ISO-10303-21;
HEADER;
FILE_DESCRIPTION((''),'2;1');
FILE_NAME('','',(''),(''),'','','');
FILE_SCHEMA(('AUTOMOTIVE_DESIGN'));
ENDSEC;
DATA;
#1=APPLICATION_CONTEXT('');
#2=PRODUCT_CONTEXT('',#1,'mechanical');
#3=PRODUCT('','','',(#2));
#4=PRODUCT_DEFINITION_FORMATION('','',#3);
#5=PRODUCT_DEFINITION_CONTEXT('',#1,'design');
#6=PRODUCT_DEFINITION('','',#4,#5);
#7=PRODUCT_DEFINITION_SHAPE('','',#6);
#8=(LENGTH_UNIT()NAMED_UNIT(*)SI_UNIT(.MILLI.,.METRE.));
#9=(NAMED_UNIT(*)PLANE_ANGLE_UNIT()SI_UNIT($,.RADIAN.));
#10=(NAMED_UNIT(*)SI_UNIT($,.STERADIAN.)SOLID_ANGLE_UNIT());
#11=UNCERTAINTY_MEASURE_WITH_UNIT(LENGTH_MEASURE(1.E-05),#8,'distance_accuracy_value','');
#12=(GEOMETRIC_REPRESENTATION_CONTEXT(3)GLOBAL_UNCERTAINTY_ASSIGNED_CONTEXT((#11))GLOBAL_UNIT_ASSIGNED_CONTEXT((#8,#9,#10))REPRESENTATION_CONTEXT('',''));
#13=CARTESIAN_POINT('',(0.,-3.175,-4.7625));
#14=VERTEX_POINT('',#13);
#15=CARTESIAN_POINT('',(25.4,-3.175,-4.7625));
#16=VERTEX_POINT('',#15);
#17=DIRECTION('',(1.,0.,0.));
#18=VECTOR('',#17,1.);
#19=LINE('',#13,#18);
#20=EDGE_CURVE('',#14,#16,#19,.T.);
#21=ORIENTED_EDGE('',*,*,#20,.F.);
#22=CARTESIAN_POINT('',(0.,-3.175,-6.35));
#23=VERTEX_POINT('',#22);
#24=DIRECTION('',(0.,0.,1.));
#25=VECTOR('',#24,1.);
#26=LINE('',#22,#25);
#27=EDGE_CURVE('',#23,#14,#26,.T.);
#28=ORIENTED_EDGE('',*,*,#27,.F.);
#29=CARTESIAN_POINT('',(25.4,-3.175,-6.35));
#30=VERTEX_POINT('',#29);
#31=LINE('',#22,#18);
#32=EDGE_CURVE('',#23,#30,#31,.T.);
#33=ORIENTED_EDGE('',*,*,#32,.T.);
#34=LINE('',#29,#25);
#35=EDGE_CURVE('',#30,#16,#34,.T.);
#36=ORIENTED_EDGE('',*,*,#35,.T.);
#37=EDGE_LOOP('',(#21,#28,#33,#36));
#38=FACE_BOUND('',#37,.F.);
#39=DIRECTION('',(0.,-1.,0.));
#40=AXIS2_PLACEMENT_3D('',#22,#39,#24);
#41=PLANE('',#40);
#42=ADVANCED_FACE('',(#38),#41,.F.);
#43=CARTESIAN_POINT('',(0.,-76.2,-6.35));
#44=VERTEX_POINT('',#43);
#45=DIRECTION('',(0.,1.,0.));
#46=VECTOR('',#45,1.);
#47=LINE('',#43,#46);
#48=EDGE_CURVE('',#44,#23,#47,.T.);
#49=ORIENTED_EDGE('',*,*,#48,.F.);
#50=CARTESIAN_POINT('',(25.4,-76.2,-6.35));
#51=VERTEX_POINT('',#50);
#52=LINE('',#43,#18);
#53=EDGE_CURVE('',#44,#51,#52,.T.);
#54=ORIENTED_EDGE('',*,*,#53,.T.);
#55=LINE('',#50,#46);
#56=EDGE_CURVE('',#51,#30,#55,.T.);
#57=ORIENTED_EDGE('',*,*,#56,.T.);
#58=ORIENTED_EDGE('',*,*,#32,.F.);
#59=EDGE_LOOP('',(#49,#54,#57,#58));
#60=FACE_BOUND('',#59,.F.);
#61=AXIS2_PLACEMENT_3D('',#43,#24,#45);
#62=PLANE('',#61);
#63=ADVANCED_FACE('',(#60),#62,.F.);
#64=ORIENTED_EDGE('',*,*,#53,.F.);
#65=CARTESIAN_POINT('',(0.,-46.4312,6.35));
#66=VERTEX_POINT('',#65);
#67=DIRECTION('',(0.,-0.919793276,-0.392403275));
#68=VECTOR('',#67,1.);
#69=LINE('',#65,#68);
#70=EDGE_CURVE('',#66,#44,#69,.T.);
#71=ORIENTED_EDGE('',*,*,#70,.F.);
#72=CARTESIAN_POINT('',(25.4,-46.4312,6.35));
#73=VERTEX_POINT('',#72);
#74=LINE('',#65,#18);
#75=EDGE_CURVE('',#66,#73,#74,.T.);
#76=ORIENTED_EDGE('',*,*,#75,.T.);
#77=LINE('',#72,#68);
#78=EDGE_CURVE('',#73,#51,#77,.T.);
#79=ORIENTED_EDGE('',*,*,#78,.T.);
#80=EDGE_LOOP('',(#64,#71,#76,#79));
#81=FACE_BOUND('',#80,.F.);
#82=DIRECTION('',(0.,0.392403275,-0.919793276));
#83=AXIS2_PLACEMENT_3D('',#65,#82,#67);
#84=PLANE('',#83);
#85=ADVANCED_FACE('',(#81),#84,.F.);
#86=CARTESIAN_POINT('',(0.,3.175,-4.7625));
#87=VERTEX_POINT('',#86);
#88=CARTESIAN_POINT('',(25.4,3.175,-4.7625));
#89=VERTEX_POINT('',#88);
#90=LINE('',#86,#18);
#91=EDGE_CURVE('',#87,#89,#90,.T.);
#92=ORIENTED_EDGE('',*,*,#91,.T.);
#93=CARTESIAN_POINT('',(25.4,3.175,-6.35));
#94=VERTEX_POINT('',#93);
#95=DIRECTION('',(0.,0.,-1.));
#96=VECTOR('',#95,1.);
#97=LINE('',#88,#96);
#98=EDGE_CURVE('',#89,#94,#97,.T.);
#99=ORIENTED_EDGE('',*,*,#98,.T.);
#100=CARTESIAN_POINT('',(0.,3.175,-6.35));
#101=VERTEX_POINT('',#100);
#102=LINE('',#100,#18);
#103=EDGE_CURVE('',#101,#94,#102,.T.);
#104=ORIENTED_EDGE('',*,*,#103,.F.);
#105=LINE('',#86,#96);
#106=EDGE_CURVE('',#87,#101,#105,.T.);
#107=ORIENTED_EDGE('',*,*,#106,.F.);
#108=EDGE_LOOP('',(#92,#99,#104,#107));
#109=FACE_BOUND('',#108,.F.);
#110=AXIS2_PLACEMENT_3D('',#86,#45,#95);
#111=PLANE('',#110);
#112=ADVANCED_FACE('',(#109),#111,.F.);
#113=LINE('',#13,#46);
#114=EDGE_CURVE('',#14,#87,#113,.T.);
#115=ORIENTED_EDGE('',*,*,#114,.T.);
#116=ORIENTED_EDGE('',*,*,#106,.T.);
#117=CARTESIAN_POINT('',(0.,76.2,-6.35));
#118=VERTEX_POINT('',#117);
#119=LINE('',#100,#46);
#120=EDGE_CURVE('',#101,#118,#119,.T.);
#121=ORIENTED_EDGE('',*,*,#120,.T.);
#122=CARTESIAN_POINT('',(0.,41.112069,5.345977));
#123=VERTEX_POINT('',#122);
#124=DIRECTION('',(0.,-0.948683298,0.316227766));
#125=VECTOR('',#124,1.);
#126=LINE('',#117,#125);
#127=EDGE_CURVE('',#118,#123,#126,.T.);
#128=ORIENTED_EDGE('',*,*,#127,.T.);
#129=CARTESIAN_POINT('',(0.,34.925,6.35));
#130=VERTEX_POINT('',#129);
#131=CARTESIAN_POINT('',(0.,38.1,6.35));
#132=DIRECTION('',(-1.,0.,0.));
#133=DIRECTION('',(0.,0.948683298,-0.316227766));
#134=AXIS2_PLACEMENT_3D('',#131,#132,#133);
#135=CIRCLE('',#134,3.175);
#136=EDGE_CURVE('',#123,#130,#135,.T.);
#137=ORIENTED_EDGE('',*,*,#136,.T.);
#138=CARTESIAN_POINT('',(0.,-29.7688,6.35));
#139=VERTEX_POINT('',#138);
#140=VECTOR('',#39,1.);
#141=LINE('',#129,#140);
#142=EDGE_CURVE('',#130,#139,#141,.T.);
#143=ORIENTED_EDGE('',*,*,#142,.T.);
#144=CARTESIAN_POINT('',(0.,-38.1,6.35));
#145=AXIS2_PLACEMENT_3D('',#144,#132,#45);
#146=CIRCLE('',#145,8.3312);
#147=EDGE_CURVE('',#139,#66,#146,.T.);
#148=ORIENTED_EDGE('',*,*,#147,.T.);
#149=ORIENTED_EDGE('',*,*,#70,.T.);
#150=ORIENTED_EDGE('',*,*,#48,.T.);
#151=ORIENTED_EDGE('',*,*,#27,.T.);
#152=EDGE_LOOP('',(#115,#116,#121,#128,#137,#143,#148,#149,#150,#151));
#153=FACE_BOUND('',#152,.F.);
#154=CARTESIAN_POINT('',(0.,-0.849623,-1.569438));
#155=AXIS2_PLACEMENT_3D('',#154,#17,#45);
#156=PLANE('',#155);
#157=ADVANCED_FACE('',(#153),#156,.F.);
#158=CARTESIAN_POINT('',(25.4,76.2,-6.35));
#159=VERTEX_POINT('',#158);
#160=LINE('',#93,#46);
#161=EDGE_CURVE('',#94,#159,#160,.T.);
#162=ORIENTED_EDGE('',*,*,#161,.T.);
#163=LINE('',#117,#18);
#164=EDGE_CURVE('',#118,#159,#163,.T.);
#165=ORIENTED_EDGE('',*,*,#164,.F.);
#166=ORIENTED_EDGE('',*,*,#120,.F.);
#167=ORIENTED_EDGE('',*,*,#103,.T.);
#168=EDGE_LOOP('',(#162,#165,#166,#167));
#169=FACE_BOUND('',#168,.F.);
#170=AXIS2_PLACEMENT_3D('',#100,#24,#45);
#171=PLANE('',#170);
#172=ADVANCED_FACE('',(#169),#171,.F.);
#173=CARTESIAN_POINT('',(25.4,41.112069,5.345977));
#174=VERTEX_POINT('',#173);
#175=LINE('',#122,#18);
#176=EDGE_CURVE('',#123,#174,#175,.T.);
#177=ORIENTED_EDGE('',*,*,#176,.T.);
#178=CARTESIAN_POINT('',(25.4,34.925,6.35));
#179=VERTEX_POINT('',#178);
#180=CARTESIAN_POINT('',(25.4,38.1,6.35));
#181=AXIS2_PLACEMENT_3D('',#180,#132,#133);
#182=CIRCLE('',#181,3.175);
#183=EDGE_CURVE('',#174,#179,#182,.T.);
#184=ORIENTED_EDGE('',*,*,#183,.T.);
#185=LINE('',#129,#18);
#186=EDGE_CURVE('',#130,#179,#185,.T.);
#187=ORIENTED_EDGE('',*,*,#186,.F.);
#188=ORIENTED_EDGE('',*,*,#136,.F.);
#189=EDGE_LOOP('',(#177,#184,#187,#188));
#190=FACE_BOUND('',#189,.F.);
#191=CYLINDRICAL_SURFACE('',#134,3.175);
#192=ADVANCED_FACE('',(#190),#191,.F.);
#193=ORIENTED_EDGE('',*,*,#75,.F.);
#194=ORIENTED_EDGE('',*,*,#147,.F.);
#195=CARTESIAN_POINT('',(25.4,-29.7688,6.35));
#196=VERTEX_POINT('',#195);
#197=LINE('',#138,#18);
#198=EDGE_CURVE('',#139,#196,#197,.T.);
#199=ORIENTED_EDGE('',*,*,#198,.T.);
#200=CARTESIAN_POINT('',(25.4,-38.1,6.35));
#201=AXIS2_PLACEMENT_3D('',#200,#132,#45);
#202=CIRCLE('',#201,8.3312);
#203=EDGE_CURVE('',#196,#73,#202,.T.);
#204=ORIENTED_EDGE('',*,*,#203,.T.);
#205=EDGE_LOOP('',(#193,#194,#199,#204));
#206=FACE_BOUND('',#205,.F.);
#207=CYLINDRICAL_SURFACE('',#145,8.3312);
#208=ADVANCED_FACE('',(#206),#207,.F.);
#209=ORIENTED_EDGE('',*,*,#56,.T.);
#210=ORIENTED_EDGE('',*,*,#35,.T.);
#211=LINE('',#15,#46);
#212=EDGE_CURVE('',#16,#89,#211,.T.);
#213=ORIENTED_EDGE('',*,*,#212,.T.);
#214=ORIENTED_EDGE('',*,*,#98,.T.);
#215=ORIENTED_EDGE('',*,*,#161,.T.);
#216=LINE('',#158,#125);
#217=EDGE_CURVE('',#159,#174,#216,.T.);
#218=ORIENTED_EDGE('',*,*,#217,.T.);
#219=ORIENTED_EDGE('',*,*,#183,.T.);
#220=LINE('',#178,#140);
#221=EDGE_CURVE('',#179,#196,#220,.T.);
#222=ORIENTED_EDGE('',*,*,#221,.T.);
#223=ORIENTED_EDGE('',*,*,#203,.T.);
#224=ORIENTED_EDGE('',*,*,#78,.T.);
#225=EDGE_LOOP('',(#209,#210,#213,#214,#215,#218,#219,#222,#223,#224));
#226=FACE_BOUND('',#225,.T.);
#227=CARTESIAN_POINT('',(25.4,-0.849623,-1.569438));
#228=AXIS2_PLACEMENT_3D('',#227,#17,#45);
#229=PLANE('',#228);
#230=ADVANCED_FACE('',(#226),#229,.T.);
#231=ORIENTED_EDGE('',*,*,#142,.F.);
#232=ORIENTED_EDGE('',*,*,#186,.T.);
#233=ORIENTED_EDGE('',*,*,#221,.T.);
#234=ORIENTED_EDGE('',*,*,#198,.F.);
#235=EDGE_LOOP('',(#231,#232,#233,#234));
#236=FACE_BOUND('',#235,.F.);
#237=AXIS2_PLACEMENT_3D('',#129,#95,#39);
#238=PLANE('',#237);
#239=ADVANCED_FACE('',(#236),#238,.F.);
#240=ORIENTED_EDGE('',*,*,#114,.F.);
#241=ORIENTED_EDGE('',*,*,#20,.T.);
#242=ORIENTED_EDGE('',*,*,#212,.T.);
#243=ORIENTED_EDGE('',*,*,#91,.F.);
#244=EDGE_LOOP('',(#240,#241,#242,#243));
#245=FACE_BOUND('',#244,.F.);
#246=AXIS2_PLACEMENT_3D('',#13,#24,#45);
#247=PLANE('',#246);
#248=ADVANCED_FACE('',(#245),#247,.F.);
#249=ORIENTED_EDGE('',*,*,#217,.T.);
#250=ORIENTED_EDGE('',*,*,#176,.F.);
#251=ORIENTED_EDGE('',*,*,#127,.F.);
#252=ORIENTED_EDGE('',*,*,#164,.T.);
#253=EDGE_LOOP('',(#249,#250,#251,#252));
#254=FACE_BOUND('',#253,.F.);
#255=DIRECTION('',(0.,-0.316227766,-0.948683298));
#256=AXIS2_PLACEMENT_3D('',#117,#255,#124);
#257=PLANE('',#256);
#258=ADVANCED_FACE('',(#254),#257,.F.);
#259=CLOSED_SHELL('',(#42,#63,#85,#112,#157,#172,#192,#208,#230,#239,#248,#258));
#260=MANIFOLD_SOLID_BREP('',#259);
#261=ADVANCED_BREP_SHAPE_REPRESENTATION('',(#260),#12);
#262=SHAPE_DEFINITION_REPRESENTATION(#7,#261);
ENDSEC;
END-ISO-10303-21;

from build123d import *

# Parameters (mm, degrees)
F1_DEPTH = 25.4


# Not quite as in the source:
# - a feature names something its author has since deleted; it is built from what else it names


with BuildPart() as f1:
    # F0 (on Right) → F1 (new body)
    with BuildSketch(Plane.YZ):
        with BuildLine():
            ThreePointArc((41.1120694713, 5.3459768429), (37.5914213785, 3.215997322), (34.925, 6.35))
            Line((34.925, 6.35), (3.175, 6.35))
            Line((3.175, 6.35), (-3.175, 6.35))
            Line((-3.175, 6.35), (-29.7688, 6.35))
            ThreePointArc((-29.7688, 6.35), (-38.1, -1.9812), (-46.4312, 6.35))
            Line((-46.4312, 6.35), (-76.2, -6.35))
            Line((-76.2, -6.35), (-3.175, -6.35))
            Line((-3.175, -6.35), (-3.175, -4.7625))
            Line((-3.175, -4.7625), (0, -4.7625))
            Line((0, -4.7625), (3.175, -4.7625))
            Line((3.175, -4.7625), (3.175, -6.35))
            Line((3.175, -6.35), (76.2, -6.35))
            Line((76.2, -6.35), (41.1120694713, 5.3459768429))
        make_face()
    extrude(amount=F1_DEPTH)


solid = f1.part
